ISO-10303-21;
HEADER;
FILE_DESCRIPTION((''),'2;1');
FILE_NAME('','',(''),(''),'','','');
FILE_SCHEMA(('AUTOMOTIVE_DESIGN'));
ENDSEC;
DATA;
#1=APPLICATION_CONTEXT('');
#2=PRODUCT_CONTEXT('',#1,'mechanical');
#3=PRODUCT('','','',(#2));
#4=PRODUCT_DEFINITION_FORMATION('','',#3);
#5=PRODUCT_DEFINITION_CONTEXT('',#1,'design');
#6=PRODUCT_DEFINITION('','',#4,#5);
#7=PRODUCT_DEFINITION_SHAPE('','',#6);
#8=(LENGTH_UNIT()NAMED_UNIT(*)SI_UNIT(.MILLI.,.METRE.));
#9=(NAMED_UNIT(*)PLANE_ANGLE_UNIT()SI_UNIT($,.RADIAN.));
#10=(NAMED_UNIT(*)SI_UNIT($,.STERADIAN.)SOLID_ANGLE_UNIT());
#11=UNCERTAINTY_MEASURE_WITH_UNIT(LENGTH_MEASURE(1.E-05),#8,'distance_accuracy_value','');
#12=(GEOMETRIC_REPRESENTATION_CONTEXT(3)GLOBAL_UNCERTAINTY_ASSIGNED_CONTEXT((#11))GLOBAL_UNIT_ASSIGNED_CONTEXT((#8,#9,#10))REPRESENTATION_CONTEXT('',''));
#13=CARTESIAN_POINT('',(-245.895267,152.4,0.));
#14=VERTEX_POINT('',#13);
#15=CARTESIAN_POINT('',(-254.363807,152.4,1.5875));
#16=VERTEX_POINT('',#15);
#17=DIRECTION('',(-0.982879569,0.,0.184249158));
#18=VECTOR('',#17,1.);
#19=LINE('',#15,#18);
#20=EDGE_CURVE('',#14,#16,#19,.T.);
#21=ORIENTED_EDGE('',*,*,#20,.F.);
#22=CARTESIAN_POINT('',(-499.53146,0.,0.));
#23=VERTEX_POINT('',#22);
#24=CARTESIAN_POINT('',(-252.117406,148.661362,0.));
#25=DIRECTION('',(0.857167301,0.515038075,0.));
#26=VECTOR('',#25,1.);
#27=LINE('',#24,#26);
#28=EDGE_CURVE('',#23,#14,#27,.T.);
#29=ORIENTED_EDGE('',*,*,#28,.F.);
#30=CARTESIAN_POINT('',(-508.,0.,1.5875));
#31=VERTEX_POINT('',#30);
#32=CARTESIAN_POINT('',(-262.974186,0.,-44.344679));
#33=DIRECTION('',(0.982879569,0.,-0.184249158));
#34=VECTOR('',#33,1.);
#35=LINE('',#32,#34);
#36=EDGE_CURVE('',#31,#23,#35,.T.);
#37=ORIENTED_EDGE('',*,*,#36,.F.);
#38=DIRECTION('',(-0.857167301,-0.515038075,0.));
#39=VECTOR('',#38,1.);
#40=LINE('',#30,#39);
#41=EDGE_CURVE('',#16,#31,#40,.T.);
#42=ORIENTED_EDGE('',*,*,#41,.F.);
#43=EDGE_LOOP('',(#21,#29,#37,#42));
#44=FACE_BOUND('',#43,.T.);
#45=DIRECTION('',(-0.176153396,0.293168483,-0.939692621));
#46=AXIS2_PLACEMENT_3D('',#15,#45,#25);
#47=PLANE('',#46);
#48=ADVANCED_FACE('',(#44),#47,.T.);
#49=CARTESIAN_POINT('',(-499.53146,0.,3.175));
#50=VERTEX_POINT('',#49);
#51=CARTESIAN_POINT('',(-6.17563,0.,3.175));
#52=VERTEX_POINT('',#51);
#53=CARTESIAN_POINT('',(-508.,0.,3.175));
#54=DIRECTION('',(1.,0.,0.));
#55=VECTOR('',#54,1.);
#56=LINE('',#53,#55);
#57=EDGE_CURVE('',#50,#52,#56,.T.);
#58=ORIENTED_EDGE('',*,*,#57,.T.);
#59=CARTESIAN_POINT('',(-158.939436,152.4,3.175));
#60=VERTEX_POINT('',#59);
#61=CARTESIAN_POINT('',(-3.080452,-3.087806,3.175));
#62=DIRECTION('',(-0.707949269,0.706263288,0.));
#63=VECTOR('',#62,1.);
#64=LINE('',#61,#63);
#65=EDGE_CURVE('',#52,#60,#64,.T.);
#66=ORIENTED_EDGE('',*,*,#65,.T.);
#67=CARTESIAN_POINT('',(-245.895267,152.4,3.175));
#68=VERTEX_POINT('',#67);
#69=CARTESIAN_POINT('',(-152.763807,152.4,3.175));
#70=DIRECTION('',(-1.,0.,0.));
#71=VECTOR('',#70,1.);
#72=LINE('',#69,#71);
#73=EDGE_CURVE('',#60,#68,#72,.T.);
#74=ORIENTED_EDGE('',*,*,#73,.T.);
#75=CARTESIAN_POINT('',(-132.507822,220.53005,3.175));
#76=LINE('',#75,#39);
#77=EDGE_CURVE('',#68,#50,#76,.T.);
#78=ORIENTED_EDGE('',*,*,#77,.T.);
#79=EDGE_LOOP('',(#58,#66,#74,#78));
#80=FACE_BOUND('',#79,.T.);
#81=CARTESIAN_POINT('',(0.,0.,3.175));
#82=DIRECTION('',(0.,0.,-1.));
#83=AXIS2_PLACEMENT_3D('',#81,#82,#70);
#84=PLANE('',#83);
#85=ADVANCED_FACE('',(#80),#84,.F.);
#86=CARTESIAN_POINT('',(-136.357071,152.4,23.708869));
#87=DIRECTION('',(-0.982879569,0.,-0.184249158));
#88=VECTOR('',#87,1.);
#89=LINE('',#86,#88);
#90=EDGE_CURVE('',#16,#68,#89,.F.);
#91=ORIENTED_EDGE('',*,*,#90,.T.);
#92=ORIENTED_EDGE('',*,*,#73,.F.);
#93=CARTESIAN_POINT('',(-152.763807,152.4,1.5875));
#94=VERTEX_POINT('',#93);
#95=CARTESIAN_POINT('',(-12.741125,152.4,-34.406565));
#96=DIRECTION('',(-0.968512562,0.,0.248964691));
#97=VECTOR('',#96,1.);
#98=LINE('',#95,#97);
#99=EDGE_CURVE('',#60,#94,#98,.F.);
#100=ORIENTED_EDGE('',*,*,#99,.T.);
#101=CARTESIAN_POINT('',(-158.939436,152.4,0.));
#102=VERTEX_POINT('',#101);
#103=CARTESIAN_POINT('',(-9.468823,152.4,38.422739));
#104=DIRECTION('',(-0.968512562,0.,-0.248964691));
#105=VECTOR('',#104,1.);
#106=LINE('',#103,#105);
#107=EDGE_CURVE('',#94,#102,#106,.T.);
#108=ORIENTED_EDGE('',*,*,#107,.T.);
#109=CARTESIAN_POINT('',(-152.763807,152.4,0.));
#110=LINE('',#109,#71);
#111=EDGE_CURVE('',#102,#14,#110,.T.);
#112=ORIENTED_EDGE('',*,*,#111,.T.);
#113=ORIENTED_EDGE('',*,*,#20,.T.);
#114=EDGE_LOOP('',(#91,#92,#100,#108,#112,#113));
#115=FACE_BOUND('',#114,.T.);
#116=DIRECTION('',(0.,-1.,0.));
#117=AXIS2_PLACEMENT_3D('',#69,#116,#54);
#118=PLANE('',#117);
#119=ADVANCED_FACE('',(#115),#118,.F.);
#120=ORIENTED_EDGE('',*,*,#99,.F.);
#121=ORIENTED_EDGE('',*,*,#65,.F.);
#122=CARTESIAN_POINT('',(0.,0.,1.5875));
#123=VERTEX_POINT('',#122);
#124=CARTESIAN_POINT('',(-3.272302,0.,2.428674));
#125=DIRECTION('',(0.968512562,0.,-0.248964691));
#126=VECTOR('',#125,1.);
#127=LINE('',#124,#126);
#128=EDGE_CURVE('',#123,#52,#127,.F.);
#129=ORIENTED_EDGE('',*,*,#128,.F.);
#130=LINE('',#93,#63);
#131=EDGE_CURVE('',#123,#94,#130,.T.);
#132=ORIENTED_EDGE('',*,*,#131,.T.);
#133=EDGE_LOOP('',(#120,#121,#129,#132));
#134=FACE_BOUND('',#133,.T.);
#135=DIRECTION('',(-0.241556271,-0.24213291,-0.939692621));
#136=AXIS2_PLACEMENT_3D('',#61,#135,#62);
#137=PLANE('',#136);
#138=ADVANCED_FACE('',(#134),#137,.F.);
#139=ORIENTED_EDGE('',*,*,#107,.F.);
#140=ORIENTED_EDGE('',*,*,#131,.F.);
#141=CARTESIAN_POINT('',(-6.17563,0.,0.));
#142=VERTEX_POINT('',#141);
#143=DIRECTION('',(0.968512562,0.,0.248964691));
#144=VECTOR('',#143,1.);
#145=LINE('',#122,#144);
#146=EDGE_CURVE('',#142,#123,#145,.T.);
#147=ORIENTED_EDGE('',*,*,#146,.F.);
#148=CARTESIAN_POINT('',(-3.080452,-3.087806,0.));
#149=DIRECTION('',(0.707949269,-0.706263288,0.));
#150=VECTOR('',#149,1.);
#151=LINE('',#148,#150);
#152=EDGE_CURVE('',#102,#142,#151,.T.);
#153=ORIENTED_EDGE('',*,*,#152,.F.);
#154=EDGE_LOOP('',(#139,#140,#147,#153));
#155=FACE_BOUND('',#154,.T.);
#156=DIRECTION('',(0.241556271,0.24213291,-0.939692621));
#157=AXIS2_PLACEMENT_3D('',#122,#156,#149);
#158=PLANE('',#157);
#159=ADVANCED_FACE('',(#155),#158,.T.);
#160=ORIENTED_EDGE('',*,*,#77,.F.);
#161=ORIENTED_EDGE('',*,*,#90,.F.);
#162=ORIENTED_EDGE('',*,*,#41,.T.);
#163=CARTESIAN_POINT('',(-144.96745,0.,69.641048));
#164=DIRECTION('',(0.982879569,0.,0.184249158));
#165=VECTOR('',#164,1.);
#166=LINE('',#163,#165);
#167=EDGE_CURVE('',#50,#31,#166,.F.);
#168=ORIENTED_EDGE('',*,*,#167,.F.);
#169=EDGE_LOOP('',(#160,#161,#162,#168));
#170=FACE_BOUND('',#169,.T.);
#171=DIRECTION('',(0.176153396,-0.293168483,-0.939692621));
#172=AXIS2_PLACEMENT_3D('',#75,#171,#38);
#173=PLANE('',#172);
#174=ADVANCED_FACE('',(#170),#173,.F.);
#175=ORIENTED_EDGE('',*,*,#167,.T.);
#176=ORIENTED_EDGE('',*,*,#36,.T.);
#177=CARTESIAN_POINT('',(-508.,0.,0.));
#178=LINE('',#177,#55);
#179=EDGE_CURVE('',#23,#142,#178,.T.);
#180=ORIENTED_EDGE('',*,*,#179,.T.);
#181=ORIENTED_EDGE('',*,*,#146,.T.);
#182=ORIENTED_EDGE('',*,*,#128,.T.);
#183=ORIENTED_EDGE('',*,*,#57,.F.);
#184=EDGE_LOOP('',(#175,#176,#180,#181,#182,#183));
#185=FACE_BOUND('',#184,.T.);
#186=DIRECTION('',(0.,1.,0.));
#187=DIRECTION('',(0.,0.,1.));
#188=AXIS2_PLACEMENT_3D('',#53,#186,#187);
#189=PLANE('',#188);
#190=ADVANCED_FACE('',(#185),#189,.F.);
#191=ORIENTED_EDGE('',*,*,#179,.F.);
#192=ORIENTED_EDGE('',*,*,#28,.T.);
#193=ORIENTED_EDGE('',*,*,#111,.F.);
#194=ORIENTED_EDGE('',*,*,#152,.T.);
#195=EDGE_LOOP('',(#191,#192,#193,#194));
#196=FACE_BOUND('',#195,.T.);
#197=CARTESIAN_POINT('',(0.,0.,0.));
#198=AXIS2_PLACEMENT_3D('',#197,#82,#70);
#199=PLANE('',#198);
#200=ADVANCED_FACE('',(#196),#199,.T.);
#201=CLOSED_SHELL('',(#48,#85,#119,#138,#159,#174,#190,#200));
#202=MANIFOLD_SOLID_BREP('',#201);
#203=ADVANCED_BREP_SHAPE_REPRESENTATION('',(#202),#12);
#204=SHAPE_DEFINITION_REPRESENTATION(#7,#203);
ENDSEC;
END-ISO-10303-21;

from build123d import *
from OCP.BRepFilletAPI import BRepFilletAPI_MakeChamfer

# Parameters (mm, degrees)
BOSS_EXTRUDE4_DEPTH = 3.175
CHAMFER1_SIZE       = 1.5875
CHAMFER1_SIZE2      = 4.361620403
CHAMFER2_SIZE       = 4.361620403
CHAMFER2_SIZE_2     = 1.5875


with BuildPart() as part:
    # Sketch1 → Boss-Extrude4 (new body)
    with BuildSketch(Plane.XY):
        Polygon((-508, 0), (0, 0), (-152.76380689, 152.4), (-254.36380689, 152.4), align=None)
    extrude(amount=BOSS_EXTRUDE4_DEPTH)

    # Chamfer1: one chamfer whose edges measure the first distance from different faces: ONE call of the kernel's chamfer builder (chamfer() names one face for all edges)
    chamfer1_edges_1 = [part.edges().sort_by_distance(p)[0] for p in [
        (-76.381903445, 76.2, 0),
    ]]
    chamfer1_side_1 = [part.faces().sort_by_distance(p)[0] for p in [
        (-76.381903445, 76.2, 1.5875),
    ]]
    chamfer1_edges_2 = [part.edges().sort_by_distance(p)[0] for p in [
        (-381.181903445, 76.2, 0),
    ]]
    chamfer1_side_2 = [part.faces().sort_by_distance(p)[0] for p in [
        (-381.181903445, 76.2, 1.5875),
    ]]
    chamfer1 = BRepFilletAPI_MakeChamfer(part.part.solid().wrapped)
    for e in chamfer1_edges_1:
        chamfer1.Add(CHAMFER1_SIZE, CHAMFER1_SIZE2, e.wrapped, chamfer1_side_1[0].wrapped)  # the first distance lies on this face
    for e in chamfer1_edges_2:
        chamfer1.Add(CHAMFER1_SIZE, CHAMFER1_SIZE2, e.wrapped, chamfer1_side_2[0].wrapped)  # the first distance lies on this face
    add(Compound.cast(chamfer1.Shape()), mode=Mode.REPLACE)

    # Chamfer2
    chamfer2_edges_1 = [part.edges().sort_by_distance(p)[0] for p in [
        (-76.381903445, 76.2, 3.175),
    ]]
    chamfer2_side_1 = [part.faces().sort_by_distance(p)[0] for p in [
        (-76.404327304, 76.177522611, 3.175),
    ]]
    chamfer2_edges_2 = [part.edges().sort_by_distance(p)[0] for p in [
        (-381.181903445, 76.2, 3.175),
    ]]
    chamfer2_side_2 = [part.faces().sort_by_distance(p)[0] for p in [
        (-381.181903445, 76.2, 3.14325),
    ]]
    chamfer2 = BRepFilletAPI_MakeChamfer(part.part.solid().wrapped)
    for e in chamfer2_edges_1:
        chamfer2.Add(CHAMFER2_SIZE - 0.0001, CHAMFER2_SIZE_2 - 0.0001, e.wrapped, chamfer2_side_1[0].wrapped)
    for e in chamfer2_edges_2:
        chamfer2.Add(CHAMFER2_SIZE_2 - 0.0001, CHAMFER2_SIZE - 0.0001, e.wrapped, chamfer2_side_2[0].wrapped)
    add(Compound.cast(chamfer2.Shape()), mode=Mode.REPLACE)  # a hair under: the kernel refuses the full size


solid = part.part
